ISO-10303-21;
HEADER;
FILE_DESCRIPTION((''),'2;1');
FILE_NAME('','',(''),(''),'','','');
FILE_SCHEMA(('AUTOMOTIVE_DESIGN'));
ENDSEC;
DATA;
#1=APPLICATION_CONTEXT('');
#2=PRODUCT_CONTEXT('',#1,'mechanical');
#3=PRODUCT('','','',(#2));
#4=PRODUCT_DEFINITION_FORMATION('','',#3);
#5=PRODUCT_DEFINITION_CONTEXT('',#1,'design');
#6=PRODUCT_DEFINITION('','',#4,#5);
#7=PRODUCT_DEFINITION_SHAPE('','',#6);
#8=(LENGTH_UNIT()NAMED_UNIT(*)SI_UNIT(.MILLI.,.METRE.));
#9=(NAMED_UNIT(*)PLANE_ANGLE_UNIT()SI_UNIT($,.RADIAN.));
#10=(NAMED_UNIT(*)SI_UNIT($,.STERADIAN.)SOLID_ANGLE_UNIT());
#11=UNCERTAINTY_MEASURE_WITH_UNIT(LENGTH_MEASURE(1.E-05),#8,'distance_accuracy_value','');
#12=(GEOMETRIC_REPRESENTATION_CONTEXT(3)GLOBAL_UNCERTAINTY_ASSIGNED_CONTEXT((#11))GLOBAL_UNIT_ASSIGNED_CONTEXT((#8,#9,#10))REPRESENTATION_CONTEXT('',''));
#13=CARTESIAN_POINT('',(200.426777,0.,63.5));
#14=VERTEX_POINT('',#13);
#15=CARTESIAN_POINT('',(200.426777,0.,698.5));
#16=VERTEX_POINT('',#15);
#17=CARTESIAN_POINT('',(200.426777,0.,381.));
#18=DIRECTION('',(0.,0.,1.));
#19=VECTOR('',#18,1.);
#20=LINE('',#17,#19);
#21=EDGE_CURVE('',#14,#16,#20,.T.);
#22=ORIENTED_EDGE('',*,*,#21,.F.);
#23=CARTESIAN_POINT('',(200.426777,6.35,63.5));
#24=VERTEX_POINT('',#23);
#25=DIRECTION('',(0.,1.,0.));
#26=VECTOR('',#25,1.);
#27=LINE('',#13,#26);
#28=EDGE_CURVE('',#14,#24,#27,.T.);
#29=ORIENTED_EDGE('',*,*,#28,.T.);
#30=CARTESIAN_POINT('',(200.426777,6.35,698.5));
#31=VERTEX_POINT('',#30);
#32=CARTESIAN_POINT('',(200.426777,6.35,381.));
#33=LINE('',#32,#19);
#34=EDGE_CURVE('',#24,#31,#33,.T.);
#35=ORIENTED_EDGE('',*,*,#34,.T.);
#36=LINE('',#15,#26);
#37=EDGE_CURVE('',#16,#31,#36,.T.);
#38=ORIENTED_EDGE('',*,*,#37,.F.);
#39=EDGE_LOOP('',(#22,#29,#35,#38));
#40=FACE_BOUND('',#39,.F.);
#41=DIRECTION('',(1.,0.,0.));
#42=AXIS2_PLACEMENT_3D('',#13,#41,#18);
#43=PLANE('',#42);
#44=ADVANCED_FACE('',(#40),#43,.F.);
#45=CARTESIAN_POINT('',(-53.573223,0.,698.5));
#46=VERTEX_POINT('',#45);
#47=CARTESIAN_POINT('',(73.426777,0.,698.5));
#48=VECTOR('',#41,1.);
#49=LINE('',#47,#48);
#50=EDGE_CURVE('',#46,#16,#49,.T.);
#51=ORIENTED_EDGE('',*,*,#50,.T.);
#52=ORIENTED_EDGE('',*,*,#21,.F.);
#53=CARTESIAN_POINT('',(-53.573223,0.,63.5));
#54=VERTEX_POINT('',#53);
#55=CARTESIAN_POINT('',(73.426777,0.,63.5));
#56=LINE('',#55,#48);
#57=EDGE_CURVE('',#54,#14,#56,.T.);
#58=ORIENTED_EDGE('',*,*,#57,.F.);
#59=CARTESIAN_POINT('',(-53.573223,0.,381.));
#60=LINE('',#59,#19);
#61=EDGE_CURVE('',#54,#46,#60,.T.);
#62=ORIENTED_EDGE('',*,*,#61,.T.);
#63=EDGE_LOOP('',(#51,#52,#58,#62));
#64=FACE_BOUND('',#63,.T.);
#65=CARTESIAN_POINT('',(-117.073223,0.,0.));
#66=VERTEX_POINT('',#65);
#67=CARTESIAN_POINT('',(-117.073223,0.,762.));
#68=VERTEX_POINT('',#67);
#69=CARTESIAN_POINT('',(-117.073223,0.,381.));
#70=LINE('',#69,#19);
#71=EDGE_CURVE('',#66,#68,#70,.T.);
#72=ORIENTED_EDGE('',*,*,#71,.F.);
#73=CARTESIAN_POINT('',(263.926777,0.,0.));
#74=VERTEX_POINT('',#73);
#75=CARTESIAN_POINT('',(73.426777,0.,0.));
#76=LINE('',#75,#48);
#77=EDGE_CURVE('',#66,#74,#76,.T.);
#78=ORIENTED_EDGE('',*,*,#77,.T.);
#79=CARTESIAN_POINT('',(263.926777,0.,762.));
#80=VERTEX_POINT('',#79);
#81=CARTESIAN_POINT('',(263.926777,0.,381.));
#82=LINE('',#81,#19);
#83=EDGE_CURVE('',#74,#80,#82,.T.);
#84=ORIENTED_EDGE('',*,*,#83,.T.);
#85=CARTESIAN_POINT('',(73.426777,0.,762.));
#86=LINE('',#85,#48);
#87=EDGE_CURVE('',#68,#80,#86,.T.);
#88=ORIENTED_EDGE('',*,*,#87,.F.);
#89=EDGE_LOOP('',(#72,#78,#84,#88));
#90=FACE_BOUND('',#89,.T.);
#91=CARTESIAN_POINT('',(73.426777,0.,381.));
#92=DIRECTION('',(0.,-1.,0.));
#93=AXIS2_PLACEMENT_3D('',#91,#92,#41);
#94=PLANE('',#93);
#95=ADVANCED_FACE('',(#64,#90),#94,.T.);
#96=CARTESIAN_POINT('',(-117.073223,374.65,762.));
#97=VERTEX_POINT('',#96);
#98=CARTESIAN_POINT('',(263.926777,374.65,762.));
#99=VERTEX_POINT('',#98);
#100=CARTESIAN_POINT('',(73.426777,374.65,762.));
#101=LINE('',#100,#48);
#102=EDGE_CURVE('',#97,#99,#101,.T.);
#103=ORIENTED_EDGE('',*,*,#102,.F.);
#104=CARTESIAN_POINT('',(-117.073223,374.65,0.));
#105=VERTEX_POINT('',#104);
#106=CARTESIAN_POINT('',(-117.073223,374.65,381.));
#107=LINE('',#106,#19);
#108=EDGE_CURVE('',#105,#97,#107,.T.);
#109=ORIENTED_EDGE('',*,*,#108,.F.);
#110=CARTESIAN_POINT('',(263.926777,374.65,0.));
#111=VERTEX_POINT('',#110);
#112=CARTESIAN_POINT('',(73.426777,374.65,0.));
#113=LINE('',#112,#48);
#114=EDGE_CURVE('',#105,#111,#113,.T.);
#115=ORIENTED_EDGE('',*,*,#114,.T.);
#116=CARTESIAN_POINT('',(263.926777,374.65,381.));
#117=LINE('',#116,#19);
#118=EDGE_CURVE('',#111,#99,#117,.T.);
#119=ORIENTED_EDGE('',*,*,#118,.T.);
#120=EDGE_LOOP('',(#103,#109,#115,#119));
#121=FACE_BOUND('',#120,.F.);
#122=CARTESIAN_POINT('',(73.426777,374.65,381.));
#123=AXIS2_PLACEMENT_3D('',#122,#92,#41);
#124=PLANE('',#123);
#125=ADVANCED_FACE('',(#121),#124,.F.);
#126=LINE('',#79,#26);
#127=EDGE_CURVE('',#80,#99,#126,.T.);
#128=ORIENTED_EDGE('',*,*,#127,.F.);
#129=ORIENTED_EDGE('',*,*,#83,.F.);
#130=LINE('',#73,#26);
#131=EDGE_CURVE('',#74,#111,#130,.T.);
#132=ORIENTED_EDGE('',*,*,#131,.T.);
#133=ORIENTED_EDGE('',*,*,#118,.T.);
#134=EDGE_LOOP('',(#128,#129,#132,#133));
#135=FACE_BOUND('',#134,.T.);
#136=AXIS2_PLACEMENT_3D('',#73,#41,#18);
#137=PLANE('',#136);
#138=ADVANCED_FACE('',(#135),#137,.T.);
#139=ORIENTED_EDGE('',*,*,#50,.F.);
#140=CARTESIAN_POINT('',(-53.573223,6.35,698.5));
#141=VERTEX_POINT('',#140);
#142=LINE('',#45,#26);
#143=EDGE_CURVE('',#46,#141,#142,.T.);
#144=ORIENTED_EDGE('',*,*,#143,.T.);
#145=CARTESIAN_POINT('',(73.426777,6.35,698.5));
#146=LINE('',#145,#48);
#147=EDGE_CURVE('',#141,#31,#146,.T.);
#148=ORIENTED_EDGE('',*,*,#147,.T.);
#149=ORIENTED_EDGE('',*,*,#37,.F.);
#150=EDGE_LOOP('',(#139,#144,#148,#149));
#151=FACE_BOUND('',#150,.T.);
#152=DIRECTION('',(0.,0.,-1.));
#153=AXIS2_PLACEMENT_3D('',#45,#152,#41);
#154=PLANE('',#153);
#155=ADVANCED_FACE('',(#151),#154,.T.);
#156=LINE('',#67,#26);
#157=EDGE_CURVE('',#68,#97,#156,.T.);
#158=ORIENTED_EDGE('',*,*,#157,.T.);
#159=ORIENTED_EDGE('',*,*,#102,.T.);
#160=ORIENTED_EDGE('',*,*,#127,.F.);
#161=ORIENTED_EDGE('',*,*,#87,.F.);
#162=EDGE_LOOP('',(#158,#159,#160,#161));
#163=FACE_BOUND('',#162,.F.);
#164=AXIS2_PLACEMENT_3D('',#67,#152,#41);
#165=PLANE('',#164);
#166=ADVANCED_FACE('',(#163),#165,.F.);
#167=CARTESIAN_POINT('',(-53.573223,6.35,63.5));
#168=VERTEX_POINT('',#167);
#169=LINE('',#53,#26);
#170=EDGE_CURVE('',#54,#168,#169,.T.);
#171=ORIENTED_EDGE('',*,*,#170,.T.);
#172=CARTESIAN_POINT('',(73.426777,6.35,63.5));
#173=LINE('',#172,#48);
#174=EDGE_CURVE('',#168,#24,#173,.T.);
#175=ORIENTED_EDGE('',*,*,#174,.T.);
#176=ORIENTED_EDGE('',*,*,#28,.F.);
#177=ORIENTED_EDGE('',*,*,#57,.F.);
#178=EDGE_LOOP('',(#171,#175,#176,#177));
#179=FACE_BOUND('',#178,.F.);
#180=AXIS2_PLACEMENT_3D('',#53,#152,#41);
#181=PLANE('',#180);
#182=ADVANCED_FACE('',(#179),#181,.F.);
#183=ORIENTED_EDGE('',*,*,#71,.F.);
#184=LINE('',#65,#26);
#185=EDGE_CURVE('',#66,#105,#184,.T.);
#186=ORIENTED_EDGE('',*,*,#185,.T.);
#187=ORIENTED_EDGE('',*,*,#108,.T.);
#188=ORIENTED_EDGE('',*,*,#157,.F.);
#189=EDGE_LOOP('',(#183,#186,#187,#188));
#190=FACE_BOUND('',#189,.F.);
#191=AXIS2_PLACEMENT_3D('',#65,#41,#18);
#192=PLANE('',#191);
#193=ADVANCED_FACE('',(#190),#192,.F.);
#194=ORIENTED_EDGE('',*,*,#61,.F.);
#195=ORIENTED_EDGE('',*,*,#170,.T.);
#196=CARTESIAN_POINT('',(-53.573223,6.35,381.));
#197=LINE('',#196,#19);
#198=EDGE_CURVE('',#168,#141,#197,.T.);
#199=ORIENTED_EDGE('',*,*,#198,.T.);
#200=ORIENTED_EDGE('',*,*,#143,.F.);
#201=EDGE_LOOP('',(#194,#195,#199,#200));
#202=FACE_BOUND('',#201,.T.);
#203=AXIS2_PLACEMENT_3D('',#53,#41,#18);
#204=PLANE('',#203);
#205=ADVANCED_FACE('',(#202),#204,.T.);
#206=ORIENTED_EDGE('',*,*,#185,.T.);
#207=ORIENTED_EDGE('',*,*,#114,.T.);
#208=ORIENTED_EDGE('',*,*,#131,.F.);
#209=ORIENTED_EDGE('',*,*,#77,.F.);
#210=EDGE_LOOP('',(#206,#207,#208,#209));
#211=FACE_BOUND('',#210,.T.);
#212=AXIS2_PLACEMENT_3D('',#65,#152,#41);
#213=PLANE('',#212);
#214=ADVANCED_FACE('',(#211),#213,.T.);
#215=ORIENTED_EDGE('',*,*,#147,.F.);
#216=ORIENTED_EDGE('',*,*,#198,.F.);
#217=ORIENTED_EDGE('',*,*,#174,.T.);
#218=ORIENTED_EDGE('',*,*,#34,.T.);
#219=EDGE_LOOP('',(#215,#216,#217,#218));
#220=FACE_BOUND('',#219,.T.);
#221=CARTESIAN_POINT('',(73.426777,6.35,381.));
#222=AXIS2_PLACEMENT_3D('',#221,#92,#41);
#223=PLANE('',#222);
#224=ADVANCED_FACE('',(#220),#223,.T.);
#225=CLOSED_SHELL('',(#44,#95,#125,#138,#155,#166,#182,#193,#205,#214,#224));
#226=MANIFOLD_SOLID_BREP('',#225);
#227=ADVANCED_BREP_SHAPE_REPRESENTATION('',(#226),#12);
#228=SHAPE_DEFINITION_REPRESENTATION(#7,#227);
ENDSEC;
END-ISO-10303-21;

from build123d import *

# Parameters (mm, degrees)
F0_W     = 381
F0_H     = 762
F0_W_2   = 254
F0_H_2   = 635
F1_DEPTH = 374.65
F2_DEPTH = 6.35


# Not quite as in the source:
# - a feature names something its author has since deleted; it is built from what else it names


with BuildPart() as f1:
    # F0 (on Front) → F1 (new body)
    with BuildSketch(Plane.XZ):
        with Locations((73.4267770052, 381)):
            Rectangle(F0_W, F0_H)
        with Locations((73.4267770052, 381)):
            Rectangle(F0_W_2, F0_H_2, mode=Mode.SUBTRACT)
        with Locations((73.4267770052, 381)):
            Rectangle(F0_W_2, F0_H_2)
    extrude(amount=-F1_DEPTH)

    # F0 (on Front) → F2 (cut)
    with BuildSketch(Plane.XZ):
        with Locations((73.4267770052, 381)):
            Rectangle(F0_W_2, F0_H_2)
    extrude(amount=-F2_DEPTH, mode=Mode.SUBTRACT)


solid = f1.part
